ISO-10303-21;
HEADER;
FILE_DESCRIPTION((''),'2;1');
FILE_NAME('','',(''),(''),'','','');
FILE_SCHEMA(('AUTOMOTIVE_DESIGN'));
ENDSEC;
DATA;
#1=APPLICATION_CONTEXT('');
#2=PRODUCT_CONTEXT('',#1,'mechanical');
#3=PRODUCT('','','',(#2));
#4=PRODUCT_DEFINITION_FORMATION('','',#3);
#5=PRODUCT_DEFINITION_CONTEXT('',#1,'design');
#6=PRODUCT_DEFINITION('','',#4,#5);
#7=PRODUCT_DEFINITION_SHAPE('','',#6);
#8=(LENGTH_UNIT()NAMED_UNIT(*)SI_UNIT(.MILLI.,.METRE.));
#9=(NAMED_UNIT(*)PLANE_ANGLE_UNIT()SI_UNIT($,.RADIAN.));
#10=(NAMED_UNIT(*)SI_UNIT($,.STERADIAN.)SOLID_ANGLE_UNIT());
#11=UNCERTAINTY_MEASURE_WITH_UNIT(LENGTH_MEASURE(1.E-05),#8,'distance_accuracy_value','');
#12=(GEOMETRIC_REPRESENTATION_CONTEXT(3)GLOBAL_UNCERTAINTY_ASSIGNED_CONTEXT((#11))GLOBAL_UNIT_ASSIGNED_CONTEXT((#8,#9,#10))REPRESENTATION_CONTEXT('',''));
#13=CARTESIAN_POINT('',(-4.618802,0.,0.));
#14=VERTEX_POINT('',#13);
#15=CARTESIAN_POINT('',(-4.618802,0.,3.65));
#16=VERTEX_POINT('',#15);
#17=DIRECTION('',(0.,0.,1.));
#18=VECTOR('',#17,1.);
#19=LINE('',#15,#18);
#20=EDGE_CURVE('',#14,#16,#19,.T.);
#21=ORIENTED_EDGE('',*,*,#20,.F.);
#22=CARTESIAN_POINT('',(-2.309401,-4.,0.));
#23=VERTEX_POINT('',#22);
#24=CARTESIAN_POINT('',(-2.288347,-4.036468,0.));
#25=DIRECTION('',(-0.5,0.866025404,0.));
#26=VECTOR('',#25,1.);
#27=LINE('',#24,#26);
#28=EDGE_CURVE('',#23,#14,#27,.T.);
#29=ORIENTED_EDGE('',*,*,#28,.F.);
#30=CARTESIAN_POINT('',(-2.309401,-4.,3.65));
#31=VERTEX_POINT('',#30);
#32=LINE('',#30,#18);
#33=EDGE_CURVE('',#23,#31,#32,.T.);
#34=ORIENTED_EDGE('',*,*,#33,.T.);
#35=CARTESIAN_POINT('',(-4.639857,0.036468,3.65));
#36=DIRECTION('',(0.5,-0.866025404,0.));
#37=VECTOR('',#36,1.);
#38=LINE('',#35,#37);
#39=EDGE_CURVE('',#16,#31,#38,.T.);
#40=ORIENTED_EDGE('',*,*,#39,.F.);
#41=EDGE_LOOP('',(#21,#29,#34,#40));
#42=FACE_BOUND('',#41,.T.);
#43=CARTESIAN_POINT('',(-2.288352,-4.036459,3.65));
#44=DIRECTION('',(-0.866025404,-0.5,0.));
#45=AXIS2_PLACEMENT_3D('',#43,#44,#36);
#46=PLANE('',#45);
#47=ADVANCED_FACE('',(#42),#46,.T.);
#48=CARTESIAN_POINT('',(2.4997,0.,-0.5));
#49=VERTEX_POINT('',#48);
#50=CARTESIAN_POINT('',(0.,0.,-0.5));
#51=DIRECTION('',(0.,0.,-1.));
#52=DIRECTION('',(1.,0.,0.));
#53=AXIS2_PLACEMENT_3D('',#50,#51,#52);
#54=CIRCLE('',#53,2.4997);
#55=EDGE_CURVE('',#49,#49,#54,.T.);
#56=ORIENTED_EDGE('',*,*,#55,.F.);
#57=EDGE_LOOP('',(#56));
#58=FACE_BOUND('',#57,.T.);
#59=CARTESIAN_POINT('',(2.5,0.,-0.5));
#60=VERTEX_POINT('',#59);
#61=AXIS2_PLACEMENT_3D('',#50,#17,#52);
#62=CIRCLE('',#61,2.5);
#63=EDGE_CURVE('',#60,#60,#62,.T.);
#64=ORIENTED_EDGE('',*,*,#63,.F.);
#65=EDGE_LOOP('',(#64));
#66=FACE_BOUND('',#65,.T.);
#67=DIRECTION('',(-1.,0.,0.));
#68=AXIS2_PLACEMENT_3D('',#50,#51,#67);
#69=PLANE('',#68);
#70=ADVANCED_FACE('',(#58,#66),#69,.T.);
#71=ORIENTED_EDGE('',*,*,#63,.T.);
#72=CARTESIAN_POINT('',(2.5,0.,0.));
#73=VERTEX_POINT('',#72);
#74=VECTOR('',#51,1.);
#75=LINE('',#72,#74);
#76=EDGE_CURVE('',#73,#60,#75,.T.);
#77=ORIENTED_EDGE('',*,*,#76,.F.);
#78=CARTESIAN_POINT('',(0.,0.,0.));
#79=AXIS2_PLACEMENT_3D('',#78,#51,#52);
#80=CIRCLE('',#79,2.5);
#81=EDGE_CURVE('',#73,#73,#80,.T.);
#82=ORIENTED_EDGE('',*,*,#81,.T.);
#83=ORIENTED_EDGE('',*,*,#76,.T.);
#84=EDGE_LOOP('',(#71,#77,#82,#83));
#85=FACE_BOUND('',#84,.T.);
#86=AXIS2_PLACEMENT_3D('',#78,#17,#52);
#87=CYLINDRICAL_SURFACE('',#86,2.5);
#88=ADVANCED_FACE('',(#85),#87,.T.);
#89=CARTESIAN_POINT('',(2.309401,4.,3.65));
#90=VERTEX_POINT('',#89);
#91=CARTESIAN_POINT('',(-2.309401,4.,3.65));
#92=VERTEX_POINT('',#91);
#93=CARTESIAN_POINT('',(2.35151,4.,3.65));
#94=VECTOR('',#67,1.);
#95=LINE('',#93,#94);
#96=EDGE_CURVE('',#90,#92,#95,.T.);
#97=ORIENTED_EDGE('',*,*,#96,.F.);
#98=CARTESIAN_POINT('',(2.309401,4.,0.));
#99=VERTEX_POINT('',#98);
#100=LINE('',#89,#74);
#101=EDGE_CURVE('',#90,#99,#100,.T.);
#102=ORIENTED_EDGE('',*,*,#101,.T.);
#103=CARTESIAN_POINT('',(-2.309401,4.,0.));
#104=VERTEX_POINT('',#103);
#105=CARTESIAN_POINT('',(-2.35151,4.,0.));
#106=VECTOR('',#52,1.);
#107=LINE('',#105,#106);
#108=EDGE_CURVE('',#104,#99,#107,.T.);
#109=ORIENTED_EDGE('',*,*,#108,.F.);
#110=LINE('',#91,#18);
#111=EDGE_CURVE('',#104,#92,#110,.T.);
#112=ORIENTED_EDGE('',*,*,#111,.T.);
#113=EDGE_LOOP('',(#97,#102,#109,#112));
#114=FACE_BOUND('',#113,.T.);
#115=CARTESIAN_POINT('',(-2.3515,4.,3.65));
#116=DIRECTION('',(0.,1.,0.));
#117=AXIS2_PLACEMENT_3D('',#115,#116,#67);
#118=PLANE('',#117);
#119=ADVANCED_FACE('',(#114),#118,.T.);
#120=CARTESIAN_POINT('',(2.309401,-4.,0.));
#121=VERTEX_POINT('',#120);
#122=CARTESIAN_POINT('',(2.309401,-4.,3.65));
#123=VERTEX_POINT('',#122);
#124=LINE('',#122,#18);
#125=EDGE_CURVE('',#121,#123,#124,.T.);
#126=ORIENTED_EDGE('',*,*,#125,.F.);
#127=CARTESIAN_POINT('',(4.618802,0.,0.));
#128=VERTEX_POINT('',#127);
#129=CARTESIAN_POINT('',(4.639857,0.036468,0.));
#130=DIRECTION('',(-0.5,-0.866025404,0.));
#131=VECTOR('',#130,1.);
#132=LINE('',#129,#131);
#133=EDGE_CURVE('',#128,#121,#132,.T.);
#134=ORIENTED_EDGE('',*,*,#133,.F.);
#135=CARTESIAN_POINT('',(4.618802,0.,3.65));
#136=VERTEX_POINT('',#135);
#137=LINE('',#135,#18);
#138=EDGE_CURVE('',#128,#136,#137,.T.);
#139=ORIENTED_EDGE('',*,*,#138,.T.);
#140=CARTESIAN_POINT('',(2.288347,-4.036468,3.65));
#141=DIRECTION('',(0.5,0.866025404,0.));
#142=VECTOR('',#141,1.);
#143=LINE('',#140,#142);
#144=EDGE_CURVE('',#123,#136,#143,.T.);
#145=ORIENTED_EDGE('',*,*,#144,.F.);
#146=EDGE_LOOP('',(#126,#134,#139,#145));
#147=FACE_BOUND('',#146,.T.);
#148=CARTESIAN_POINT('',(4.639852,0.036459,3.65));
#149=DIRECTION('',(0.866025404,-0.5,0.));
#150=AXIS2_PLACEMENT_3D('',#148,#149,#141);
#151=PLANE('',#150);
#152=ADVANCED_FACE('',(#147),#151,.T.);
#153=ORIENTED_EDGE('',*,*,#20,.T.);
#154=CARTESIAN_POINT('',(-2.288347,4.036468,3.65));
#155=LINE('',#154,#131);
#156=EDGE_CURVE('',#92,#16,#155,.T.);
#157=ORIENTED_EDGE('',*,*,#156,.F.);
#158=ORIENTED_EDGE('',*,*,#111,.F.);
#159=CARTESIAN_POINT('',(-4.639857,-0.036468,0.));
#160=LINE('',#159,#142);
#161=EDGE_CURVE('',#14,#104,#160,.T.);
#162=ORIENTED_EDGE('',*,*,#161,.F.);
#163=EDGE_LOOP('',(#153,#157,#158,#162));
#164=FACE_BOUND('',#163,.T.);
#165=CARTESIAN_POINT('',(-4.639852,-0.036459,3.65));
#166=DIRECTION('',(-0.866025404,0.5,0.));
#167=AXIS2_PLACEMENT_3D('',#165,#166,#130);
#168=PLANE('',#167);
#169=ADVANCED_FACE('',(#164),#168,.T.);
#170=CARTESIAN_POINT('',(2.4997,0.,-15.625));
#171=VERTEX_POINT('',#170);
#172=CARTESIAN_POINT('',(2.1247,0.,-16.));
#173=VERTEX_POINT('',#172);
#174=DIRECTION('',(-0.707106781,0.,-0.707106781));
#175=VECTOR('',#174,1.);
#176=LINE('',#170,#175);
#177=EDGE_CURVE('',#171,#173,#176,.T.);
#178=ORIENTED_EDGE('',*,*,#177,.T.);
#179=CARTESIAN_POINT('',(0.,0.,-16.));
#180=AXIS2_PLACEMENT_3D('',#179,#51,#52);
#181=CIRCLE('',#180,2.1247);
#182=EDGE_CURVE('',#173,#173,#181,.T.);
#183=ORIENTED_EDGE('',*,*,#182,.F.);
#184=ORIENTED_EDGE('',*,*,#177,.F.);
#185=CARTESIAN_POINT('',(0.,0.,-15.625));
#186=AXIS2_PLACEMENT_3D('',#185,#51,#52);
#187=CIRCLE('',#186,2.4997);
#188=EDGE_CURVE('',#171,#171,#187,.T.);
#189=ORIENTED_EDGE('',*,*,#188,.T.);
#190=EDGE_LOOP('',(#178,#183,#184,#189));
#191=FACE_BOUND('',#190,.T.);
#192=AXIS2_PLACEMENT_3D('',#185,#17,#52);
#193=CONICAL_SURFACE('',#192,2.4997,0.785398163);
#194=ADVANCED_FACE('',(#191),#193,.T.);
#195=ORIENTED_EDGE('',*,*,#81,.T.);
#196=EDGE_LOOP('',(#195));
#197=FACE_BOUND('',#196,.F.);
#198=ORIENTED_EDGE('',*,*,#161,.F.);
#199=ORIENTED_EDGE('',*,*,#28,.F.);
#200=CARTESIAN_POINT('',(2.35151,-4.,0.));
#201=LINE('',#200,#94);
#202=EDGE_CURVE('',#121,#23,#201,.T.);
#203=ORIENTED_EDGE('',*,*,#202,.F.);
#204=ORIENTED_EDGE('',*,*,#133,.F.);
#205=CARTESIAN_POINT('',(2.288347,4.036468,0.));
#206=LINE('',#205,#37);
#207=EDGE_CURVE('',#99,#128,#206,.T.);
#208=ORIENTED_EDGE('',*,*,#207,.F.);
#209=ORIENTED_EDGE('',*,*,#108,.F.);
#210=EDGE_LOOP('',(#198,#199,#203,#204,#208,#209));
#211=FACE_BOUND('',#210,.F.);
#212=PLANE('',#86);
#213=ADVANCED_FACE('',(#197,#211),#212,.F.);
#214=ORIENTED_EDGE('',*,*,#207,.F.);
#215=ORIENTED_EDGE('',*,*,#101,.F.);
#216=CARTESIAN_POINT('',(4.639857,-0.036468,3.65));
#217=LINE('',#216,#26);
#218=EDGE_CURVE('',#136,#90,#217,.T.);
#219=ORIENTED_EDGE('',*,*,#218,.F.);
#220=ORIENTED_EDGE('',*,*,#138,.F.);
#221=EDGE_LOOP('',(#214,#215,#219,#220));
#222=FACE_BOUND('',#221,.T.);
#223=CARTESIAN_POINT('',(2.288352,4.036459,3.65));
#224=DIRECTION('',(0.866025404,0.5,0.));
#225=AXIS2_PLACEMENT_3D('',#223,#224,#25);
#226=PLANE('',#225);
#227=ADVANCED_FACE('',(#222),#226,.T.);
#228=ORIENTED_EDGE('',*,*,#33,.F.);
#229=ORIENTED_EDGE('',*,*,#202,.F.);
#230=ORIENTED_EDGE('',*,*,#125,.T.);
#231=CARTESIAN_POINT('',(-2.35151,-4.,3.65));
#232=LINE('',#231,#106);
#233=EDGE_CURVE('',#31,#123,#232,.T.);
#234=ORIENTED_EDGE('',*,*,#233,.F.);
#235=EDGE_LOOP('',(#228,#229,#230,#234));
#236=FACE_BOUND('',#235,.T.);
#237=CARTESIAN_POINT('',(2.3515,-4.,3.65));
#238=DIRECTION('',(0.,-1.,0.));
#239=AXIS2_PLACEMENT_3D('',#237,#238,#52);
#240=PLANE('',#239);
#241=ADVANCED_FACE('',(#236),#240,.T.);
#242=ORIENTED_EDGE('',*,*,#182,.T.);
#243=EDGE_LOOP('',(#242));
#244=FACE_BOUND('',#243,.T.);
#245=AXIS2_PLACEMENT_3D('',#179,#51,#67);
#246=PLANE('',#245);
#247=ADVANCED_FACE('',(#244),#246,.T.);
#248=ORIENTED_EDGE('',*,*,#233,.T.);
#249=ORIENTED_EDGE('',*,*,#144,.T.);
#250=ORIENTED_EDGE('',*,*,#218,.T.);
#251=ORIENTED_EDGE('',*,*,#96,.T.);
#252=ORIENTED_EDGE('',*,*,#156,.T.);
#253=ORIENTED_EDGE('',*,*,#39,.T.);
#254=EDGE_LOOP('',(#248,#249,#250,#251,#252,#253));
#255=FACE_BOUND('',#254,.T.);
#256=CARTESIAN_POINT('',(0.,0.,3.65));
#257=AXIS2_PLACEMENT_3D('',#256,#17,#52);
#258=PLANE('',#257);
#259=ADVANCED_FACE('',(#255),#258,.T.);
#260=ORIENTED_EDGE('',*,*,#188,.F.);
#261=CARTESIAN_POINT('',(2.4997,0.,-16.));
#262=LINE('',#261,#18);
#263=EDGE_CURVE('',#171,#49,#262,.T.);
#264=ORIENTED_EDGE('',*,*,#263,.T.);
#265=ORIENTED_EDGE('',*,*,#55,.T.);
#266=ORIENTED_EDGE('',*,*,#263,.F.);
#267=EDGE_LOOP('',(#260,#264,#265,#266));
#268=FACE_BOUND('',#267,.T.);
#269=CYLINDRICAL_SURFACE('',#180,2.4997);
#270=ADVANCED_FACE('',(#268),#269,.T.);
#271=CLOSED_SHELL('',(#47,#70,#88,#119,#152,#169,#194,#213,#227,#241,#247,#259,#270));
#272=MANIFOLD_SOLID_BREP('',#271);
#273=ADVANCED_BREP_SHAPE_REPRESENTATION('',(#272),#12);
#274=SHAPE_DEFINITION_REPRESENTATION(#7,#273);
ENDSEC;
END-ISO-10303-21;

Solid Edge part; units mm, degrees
sketch "Sketch1" plane through (0, 0, 0) normal (0, 0, 1) x (1, 0, 0)
  circle A0 centre (0, 0) radius 4.64
  dimension "D1" = 9.28
extrude "Protrusion1" add sketch "Sketch1" along normal blind 3.65
sketch "Sketch2" plane through (0, 0, 0) normal (0, 0, -1) x (1, 0, 0)
  circle A0 centre (0, 0) radius 2.5
extrude "Protrusion2" add sketch "Sketch2" along normal blind 16
sketch "Sketch3" plane through (0, 0, -16) normal (0, 0, -1) x (1, 0, 0)
  circle A0 centre (0, 0) radius 2.4997
extrude "Cutout1" cut sketch "Sketch3" against normal blind 15.5 flip side to cut
chamfer "Chamfer_1" distance 0.375 angle 45 1 edges at (-2.4997, 0, -16)
sketch "Sketch4" plane through (0, 0, 3.65) normal (0, 0, 1) x (1, 0, 0)
  line L0 (-2.3515, 4) -> (2.3515, 4)
  dimension "D1" = 8
extrude "Cutout2" cut sketch "Sketch4" against normal up to next material side at (0, 4.05, 3.65)
pattern_circular "Pattern1" count 6 over 360 about axis through (0, 0, 3.65) along (0, 0, 1) of "Cutout2"
properties part number "24101189"
